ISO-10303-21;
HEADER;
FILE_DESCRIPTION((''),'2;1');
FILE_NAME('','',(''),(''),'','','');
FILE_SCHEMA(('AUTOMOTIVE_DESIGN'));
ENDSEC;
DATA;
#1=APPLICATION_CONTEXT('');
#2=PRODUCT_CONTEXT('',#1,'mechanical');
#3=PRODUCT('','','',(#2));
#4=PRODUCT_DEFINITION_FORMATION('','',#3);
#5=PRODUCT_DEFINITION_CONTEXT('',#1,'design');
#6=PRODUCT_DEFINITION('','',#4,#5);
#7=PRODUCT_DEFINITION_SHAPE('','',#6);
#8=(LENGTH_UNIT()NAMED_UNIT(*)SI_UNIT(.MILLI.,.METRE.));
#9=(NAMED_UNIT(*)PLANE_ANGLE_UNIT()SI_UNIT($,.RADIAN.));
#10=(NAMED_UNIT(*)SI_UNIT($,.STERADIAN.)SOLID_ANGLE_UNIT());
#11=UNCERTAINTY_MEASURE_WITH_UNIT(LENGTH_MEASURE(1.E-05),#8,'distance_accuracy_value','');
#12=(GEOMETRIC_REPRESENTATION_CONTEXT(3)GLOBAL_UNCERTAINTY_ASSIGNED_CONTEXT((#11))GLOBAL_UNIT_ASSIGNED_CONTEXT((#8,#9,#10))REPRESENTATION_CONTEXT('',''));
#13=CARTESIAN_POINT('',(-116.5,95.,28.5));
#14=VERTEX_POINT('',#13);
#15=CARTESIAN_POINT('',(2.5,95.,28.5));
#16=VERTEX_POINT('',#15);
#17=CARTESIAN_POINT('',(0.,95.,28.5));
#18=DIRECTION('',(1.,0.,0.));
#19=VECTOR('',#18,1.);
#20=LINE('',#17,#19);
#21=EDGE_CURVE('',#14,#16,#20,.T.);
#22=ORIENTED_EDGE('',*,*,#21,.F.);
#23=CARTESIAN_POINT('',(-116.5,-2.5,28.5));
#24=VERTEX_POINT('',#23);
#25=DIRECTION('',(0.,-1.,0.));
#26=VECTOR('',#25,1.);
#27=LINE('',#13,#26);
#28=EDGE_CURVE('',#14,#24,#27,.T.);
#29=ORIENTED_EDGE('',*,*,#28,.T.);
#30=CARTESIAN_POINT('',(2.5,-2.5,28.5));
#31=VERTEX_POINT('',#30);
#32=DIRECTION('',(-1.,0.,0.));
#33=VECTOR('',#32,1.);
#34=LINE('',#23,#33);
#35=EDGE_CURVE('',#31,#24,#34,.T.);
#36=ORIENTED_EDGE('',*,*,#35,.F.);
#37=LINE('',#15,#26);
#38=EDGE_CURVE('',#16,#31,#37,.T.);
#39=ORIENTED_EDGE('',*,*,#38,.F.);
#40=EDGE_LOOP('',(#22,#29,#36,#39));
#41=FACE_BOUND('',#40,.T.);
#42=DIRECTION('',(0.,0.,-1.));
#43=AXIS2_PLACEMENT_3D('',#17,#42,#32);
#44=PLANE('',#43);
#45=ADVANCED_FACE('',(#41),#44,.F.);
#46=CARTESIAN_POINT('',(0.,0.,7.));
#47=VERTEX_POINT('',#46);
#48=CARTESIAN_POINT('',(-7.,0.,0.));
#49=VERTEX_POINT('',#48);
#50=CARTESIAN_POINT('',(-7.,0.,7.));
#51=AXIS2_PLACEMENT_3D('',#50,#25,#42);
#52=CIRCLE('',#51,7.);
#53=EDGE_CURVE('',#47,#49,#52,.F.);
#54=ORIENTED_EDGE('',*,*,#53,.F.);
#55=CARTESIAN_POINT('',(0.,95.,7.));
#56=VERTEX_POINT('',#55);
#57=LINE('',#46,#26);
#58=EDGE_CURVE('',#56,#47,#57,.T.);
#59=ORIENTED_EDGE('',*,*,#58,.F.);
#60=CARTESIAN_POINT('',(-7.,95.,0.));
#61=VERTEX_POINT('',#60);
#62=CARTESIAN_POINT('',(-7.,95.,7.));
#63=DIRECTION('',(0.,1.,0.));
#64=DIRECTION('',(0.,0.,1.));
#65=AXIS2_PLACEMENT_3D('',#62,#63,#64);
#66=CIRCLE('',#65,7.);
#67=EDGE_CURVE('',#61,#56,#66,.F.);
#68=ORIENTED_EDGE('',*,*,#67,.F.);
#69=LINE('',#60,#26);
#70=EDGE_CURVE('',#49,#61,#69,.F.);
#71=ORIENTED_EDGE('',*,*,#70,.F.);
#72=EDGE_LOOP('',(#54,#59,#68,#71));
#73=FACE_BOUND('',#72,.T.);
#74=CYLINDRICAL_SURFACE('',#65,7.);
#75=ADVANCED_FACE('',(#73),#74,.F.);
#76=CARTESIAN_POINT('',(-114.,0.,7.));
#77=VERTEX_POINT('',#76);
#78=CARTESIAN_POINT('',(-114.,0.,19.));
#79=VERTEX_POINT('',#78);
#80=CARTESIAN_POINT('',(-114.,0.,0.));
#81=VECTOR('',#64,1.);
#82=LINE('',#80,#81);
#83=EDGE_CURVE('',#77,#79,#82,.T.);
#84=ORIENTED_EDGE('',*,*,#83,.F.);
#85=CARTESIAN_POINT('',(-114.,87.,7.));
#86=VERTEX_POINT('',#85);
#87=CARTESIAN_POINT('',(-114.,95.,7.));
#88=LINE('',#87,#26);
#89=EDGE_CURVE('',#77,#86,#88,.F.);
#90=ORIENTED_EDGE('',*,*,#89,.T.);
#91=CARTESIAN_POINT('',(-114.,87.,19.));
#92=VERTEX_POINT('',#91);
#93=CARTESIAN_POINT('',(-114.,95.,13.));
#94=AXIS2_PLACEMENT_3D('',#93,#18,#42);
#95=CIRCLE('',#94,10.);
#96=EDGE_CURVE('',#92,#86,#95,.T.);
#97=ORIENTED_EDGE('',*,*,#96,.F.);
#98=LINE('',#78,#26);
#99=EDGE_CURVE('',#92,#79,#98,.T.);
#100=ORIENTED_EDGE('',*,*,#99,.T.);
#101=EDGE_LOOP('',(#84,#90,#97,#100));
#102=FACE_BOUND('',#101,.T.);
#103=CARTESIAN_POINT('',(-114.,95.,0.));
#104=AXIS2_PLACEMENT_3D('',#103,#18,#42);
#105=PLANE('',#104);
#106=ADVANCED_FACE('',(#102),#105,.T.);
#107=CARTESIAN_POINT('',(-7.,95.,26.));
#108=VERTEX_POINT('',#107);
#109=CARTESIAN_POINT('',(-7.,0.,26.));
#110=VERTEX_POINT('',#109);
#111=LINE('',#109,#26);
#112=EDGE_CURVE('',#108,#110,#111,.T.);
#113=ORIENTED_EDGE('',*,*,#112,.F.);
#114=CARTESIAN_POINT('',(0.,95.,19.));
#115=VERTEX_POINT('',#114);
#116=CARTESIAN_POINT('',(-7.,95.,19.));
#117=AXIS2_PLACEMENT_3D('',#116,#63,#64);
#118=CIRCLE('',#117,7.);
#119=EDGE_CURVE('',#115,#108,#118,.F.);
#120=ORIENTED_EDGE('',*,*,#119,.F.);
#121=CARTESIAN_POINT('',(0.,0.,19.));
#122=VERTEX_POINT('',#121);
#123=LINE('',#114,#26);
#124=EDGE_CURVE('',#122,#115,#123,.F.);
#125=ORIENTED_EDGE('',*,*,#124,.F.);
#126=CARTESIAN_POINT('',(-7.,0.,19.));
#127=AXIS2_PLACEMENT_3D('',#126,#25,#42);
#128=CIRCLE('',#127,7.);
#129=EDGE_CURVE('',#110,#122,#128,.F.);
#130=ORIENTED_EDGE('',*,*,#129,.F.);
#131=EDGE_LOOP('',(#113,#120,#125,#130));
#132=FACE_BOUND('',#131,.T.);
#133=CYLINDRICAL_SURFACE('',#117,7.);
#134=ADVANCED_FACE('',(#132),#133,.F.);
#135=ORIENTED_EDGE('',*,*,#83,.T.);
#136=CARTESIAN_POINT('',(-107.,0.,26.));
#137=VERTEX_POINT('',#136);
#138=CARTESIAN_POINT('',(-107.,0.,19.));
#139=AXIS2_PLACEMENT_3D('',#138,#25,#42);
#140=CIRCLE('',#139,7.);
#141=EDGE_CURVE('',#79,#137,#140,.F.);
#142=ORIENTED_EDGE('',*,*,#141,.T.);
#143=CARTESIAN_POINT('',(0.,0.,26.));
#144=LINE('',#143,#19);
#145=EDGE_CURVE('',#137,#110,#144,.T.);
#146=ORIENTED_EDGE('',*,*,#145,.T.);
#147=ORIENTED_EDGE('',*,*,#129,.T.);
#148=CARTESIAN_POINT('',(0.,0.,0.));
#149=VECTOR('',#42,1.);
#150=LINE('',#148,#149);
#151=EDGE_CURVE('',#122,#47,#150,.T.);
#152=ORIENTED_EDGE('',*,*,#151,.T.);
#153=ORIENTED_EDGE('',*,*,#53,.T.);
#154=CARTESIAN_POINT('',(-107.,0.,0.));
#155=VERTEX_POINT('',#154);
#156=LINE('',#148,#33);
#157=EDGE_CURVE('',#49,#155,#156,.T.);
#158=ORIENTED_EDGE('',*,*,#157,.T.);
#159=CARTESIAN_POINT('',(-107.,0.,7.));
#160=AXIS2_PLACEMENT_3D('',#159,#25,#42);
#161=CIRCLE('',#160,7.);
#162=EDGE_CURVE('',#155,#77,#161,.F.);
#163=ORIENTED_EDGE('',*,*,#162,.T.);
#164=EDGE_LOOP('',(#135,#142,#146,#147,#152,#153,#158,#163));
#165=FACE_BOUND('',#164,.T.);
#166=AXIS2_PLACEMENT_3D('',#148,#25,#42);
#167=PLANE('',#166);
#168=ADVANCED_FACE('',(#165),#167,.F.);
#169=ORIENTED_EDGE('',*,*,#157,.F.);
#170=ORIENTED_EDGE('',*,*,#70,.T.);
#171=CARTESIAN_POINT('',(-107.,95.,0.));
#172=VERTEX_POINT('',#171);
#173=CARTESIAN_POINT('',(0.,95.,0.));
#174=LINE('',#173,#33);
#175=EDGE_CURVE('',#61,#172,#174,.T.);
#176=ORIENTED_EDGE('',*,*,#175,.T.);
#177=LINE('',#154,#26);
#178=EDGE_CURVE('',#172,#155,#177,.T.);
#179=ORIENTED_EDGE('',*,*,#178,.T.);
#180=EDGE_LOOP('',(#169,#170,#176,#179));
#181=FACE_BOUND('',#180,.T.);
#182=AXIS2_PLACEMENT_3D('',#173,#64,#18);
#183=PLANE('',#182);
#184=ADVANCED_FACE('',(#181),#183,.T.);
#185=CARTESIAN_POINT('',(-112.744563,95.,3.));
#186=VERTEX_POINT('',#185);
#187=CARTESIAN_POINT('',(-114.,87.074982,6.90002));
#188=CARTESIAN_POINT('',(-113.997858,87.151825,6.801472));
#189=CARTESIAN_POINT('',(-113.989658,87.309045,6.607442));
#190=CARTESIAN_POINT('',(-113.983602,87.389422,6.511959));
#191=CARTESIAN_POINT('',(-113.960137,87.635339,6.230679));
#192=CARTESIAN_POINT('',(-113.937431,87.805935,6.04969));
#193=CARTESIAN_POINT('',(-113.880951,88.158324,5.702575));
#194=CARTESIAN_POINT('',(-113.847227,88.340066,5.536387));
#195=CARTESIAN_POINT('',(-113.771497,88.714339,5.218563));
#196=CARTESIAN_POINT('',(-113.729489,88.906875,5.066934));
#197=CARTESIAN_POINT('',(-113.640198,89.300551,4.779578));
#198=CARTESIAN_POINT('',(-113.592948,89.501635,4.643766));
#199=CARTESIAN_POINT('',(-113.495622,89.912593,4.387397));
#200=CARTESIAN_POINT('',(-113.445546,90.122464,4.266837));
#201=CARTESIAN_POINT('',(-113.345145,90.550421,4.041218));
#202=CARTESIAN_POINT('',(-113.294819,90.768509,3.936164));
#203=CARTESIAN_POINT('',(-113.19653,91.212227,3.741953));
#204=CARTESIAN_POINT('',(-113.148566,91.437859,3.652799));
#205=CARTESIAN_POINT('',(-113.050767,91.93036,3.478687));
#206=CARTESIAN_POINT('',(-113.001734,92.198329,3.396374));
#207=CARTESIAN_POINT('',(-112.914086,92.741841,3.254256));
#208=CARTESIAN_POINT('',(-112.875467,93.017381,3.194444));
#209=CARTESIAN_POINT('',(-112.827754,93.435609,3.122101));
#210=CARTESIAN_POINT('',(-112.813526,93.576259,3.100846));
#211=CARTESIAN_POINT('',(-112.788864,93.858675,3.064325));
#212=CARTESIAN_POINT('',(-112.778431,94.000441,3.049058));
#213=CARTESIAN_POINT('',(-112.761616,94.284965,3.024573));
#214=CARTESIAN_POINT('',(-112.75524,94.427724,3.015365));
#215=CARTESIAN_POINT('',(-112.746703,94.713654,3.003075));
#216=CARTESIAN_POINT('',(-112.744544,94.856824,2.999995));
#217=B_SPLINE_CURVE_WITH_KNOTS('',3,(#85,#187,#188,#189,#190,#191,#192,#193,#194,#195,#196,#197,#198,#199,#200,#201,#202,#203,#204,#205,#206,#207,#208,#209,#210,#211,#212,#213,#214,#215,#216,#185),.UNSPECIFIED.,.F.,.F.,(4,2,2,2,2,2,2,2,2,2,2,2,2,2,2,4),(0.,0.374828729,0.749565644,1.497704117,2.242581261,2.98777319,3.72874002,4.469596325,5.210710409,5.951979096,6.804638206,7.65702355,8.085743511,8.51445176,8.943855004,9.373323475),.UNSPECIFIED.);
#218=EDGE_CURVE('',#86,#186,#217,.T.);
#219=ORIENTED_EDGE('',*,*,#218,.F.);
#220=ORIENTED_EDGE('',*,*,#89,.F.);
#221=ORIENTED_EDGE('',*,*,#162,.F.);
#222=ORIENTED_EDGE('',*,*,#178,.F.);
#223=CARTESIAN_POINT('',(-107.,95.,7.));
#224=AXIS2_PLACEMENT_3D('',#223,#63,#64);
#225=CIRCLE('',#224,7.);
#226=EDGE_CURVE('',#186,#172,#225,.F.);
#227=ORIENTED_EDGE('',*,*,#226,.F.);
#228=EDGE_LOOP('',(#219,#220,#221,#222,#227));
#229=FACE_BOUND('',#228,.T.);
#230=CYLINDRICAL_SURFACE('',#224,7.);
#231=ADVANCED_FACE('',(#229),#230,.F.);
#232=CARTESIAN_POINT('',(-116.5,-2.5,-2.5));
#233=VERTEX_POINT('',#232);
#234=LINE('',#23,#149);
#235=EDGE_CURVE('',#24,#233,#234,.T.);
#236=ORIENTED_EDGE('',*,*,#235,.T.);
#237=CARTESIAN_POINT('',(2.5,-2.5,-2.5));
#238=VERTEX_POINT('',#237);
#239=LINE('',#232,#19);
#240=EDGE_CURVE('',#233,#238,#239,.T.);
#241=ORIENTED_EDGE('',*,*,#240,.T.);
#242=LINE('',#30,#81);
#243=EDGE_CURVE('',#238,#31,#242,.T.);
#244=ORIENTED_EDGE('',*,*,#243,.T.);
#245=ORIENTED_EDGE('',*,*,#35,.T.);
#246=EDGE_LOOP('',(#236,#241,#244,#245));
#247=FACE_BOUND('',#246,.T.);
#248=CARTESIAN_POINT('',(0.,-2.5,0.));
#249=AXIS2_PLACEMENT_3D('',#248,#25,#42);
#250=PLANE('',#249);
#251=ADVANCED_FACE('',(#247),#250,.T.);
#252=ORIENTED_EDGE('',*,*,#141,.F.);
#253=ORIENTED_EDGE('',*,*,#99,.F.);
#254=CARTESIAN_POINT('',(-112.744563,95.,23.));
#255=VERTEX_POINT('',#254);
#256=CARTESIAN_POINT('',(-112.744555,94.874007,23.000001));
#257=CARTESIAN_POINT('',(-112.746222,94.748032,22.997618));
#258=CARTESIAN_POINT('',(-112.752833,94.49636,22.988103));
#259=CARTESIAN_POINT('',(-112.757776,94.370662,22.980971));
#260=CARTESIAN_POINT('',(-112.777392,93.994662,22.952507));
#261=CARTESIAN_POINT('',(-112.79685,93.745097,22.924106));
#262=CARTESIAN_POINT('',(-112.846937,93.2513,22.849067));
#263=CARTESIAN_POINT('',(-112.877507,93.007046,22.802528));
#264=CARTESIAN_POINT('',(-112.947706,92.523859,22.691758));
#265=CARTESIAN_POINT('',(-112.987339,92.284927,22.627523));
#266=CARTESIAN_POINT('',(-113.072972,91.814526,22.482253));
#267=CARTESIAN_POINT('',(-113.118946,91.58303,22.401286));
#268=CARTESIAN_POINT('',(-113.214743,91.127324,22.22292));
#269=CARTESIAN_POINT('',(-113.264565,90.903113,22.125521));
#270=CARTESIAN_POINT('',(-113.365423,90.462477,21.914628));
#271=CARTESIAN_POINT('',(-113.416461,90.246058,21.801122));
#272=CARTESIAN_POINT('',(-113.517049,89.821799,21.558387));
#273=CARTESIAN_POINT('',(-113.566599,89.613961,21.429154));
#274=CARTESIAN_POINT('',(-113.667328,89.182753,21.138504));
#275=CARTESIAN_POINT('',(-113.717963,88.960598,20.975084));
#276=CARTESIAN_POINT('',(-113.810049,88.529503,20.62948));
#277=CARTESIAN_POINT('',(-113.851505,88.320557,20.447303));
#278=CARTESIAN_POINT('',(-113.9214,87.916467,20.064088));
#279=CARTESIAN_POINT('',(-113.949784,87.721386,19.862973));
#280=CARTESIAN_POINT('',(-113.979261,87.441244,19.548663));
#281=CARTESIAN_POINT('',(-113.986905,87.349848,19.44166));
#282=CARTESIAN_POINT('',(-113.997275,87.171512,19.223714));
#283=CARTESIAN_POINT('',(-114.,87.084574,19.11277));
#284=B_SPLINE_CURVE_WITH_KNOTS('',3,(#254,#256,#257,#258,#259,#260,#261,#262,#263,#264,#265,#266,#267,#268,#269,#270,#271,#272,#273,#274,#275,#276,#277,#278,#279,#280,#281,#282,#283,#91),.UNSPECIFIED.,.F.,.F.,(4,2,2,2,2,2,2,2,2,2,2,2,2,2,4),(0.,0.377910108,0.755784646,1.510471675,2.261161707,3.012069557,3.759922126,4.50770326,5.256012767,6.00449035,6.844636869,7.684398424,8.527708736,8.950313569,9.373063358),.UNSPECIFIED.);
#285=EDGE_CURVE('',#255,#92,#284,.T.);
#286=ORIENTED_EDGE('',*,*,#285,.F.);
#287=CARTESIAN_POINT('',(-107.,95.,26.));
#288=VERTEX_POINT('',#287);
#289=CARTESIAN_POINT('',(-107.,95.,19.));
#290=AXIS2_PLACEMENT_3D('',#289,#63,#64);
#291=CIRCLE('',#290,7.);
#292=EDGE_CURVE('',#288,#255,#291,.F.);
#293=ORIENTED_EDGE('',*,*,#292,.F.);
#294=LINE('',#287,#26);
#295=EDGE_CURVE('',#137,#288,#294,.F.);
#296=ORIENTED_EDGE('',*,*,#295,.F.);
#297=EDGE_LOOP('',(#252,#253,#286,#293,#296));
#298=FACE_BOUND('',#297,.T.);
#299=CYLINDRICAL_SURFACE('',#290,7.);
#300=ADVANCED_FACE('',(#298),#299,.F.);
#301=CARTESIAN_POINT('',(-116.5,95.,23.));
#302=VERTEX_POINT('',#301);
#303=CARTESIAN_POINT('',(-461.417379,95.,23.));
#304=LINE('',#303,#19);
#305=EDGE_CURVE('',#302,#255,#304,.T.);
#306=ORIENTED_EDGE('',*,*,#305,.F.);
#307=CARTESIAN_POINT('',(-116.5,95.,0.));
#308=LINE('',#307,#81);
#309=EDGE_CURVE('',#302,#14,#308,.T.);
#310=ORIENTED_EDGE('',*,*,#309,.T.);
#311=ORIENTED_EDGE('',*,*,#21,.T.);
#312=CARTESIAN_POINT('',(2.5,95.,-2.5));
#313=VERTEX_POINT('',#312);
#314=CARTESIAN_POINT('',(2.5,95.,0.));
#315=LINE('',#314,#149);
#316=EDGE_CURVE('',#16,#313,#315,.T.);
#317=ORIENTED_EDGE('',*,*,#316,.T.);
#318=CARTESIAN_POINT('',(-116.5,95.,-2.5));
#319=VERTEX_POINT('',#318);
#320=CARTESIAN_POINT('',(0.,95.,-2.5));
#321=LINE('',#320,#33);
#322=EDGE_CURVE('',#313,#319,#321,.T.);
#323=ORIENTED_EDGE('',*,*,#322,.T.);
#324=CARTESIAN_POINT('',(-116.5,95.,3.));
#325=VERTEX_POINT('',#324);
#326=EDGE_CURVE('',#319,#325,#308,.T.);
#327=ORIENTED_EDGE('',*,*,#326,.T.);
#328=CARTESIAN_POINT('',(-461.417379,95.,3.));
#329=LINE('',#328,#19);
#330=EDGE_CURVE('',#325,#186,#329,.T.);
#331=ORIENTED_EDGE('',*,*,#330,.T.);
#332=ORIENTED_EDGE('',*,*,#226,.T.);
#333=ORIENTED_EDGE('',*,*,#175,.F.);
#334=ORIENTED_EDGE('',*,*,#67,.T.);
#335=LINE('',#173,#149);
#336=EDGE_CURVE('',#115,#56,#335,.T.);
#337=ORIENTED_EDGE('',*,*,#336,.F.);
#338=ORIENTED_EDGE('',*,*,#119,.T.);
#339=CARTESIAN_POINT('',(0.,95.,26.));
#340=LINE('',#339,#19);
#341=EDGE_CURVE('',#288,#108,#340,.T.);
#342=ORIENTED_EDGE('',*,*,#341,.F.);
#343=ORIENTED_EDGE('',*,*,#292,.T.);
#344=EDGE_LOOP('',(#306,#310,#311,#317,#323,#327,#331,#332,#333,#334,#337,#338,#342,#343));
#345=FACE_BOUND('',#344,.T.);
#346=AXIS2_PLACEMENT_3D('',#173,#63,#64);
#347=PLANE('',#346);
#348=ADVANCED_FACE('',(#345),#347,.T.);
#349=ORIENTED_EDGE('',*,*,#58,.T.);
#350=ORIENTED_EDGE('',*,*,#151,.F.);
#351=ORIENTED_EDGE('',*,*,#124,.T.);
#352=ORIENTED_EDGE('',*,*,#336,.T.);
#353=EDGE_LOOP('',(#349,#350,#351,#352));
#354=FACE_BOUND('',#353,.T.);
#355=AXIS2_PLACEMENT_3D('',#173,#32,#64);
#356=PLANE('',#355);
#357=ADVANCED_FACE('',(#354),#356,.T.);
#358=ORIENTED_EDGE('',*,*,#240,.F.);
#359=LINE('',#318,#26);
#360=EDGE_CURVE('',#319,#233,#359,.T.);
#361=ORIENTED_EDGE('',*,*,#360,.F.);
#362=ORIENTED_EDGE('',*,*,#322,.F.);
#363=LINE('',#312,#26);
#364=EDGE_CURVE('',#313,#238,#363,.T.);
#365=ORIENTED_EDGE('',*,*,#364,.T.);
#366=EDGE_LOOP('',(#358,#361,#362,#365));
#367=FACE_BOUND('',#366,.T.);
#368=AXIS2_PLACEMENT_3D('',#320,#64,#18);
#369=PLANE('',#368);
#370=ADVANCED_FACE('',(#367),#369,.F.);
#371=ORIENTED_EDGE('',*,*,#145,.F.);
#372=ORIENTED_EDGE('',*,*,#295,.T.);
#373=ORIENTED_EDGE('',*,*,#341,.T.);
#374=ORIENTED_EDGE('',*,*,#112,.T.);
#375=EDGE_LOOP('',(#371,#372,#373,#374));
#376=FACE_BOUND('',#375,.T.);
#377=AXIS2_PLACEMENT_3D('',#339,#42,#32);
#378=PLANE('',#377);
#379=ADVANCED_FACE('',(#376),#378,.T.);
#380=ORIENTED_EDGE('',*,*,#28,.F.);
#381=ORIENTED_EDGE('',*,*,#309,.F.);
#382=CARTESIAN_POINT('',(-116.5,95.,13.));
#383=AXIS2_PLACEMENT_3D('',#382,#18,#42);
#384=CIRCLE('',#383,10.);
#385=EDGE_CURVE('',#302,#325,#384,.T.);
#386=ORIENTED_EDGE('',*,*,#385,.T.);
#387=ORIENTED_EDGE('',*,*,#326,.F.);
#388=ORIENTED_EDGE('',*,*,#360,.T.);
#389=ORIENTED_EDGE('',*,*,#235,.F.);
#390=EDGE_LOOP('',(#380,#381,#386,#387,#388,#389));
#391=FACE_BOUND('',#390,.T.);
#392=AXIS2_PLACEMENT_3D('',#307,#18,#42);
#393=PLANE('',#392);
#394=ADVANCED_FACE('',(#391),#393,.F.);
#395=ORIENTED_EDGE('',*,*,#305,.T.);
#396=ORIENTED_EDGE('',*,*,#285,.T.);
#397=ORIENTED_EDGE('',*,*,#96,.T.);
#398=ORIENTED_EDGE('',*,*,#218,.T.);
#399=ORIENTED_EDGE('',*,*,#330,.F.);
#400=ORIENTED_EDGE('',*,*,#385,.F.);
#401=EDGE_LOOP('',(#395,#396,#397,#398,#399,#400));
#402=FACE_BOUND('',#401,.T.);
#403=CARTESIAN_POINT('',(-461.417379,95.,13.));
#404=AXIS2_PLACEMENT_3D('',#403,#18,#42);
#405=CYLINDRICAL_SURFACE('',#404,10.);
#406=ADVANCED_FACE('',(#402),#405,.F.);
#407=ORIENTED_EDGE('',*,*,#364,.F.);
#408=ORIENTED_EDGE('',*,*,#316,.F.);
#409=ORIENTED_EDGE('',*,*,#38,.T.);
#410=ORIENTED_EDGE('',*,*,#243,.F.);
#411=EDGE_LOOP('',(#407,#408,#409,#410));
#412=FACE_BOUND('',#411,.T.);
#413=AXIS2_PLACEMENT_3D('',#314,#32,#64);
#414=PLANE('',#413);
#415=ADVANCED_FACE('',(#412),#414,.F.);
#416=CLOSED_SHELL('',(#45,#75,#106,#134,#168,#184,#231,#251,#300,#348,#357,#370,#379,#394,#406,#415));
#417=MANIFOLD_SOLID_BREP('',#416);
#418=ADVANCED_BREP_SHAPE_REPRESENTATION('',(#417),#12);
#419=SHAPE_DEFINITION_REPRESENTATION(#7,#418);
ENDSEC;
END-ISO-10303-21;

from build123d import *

# Parameters (mm, degrees)
SKETCH1_W               = 119
SKETCH1_H               = 31
SKETCH1_W_2             = 114
SKETCH1_H_2             = 26
EXTRUDE_THIN1_DEPTH     = 95
SKETCH2_W               = 119
SKETCH2_H               = 31
BOSS_EXTRUDE1_DEPTH     = 2.5
CUT_EXTRUDE1_DEPTH      = 155.913685645
CUT_EXTRUDE1_DEPTH_BACK = 2.5
FILLET2_R               = 7


with BuildPart() as part:
    # Sketch1 → Extrude-Thin1 (new body)
    with BuildSketch(Plane(origin=(0, 0, 0), x_dir=(1, 0, 0), z_dir=(0, 1, 0))):
        with Locations((-57, -13)):
            Rectangle(SKETCH1_W, SKETCH1_H)
        with Locations((-57, -13)):
            Rectangle(SKETCH1_W_2, SKETCH1_H_2, mode=Mode.SUBTRACT)
    extrude(amount=EXTRUDE_THIN1_DEPTH)

    # Sketch2 → Boss-Extrude1 (add)
    with BuildSketch(Plane.XZ):
        with Locations((-57, 13)):
            Rectangle(SKETCH2_W, SKETCH2_H)
    extrude(amount=BOSS_EXTRUDE1_DEPTH)

    # Sketch3 → Cut-Extrude1 (cut, two sides: drawn at the far end of the back side and taken through both)
    with BuildSketch(Plane.ZY.offset(116.5).offset(-CUT_EXTRUDE1_DEPTH_BACK)):
        with BuildLine():
            Line((3, 306.558924387), (3, 95))
            ThreePointArc((3, 95), (13, 85), (23, 95))
            Line((23, 95), (23, 306.558924387))
            Line((23, 306.558924387), (23, 729.676773161))
            Line((23, 729.676773161), (3, 729.676773161))
            Line((3, 729.676773161), (3, 306.558924387))
        make_face()
    extrude(amount=CUT_EXTRUDE1_DEPTH + CUT_EXTRUDE1_DEPTH_BACK, mode=Mode.SUBTRACT)

    # Fillet2
    # the kernel refuses this fillet: 7 mm, written as the material it adds along each edge
    with BuildSketch(Plane(origin=(0, 0, 26), x_dir=(-1, 0, 0), z_dir=(0, 1, 0)), Plane(origin=(0, 0, 0), x_dir=(0, 0, 1), z_dir=(0, 1, 0))) as fillet2_piece_1:
        with BuildLine():
            CenterArc((FILLET2_R, -FILLET2_R), FILLET2_R, 90, 90)
            Line((0, -FILLET2_R), (0, 0))
            Line((0, 0), (FILLET2_R, 0))
        make_face()
    extrude(amount=95)
    with BuildSketch(Plane(origin=(-114, 0, 26), x_dir=(0, 0, -1), z_dir=(0, 1, 0))) as fillet2_piece_2_section:
        with BuildLine():
            CenterArc((FILLET2_R, -FILLET2_R), FILLET2_R, 90, 90)
            Line((0, -FILLET2_R), (0, 0))
            Line((0, 0), (FILLET2_R, 0))
        make_face()
    fillet2_piece_2 = extrude(amount=95, mode=Mode.PRIVATE)
    fillet2_piece_2 = fillet2_piece_2 - Plane(origin=(-112.403974481, 95, 13), x_dir=(0, 0, -1), z_dir=(1, 0, 0)) * Cylinder(10, 218, mode=Mode.PRIVATE)
    add(fillet2_piece_2)
    with BuildSketch(Plane(origin=(-114, 0, 0), x_dir=(0, 0, 1), z_dir=(0, 1, 0))) as fillet2_piece_3_section:
        with BuildLine():
            CenterArc((FILLET2_R, FILLET2_R), FILLET2_R, 180, 90)
            Line((0, FILLET2_R), (0, 0))
            Line((0, 0), (FILLET2_R, 0))
        make_face()
    fillet2_piece_3 = extrude(amount=95, mode=Mode.PRIVATE)
    fillet2_piece_3 = fillet2_piece_3 - Plane(origin=(-112.403974465, 95, 13), x_dir=(0, 0, -1), z_dir=(1, 0, 0)) * Cylinder(10, 218, mode=Mode.PRIVATE)
    add(fillet2_piece_3)


solid = part.part
